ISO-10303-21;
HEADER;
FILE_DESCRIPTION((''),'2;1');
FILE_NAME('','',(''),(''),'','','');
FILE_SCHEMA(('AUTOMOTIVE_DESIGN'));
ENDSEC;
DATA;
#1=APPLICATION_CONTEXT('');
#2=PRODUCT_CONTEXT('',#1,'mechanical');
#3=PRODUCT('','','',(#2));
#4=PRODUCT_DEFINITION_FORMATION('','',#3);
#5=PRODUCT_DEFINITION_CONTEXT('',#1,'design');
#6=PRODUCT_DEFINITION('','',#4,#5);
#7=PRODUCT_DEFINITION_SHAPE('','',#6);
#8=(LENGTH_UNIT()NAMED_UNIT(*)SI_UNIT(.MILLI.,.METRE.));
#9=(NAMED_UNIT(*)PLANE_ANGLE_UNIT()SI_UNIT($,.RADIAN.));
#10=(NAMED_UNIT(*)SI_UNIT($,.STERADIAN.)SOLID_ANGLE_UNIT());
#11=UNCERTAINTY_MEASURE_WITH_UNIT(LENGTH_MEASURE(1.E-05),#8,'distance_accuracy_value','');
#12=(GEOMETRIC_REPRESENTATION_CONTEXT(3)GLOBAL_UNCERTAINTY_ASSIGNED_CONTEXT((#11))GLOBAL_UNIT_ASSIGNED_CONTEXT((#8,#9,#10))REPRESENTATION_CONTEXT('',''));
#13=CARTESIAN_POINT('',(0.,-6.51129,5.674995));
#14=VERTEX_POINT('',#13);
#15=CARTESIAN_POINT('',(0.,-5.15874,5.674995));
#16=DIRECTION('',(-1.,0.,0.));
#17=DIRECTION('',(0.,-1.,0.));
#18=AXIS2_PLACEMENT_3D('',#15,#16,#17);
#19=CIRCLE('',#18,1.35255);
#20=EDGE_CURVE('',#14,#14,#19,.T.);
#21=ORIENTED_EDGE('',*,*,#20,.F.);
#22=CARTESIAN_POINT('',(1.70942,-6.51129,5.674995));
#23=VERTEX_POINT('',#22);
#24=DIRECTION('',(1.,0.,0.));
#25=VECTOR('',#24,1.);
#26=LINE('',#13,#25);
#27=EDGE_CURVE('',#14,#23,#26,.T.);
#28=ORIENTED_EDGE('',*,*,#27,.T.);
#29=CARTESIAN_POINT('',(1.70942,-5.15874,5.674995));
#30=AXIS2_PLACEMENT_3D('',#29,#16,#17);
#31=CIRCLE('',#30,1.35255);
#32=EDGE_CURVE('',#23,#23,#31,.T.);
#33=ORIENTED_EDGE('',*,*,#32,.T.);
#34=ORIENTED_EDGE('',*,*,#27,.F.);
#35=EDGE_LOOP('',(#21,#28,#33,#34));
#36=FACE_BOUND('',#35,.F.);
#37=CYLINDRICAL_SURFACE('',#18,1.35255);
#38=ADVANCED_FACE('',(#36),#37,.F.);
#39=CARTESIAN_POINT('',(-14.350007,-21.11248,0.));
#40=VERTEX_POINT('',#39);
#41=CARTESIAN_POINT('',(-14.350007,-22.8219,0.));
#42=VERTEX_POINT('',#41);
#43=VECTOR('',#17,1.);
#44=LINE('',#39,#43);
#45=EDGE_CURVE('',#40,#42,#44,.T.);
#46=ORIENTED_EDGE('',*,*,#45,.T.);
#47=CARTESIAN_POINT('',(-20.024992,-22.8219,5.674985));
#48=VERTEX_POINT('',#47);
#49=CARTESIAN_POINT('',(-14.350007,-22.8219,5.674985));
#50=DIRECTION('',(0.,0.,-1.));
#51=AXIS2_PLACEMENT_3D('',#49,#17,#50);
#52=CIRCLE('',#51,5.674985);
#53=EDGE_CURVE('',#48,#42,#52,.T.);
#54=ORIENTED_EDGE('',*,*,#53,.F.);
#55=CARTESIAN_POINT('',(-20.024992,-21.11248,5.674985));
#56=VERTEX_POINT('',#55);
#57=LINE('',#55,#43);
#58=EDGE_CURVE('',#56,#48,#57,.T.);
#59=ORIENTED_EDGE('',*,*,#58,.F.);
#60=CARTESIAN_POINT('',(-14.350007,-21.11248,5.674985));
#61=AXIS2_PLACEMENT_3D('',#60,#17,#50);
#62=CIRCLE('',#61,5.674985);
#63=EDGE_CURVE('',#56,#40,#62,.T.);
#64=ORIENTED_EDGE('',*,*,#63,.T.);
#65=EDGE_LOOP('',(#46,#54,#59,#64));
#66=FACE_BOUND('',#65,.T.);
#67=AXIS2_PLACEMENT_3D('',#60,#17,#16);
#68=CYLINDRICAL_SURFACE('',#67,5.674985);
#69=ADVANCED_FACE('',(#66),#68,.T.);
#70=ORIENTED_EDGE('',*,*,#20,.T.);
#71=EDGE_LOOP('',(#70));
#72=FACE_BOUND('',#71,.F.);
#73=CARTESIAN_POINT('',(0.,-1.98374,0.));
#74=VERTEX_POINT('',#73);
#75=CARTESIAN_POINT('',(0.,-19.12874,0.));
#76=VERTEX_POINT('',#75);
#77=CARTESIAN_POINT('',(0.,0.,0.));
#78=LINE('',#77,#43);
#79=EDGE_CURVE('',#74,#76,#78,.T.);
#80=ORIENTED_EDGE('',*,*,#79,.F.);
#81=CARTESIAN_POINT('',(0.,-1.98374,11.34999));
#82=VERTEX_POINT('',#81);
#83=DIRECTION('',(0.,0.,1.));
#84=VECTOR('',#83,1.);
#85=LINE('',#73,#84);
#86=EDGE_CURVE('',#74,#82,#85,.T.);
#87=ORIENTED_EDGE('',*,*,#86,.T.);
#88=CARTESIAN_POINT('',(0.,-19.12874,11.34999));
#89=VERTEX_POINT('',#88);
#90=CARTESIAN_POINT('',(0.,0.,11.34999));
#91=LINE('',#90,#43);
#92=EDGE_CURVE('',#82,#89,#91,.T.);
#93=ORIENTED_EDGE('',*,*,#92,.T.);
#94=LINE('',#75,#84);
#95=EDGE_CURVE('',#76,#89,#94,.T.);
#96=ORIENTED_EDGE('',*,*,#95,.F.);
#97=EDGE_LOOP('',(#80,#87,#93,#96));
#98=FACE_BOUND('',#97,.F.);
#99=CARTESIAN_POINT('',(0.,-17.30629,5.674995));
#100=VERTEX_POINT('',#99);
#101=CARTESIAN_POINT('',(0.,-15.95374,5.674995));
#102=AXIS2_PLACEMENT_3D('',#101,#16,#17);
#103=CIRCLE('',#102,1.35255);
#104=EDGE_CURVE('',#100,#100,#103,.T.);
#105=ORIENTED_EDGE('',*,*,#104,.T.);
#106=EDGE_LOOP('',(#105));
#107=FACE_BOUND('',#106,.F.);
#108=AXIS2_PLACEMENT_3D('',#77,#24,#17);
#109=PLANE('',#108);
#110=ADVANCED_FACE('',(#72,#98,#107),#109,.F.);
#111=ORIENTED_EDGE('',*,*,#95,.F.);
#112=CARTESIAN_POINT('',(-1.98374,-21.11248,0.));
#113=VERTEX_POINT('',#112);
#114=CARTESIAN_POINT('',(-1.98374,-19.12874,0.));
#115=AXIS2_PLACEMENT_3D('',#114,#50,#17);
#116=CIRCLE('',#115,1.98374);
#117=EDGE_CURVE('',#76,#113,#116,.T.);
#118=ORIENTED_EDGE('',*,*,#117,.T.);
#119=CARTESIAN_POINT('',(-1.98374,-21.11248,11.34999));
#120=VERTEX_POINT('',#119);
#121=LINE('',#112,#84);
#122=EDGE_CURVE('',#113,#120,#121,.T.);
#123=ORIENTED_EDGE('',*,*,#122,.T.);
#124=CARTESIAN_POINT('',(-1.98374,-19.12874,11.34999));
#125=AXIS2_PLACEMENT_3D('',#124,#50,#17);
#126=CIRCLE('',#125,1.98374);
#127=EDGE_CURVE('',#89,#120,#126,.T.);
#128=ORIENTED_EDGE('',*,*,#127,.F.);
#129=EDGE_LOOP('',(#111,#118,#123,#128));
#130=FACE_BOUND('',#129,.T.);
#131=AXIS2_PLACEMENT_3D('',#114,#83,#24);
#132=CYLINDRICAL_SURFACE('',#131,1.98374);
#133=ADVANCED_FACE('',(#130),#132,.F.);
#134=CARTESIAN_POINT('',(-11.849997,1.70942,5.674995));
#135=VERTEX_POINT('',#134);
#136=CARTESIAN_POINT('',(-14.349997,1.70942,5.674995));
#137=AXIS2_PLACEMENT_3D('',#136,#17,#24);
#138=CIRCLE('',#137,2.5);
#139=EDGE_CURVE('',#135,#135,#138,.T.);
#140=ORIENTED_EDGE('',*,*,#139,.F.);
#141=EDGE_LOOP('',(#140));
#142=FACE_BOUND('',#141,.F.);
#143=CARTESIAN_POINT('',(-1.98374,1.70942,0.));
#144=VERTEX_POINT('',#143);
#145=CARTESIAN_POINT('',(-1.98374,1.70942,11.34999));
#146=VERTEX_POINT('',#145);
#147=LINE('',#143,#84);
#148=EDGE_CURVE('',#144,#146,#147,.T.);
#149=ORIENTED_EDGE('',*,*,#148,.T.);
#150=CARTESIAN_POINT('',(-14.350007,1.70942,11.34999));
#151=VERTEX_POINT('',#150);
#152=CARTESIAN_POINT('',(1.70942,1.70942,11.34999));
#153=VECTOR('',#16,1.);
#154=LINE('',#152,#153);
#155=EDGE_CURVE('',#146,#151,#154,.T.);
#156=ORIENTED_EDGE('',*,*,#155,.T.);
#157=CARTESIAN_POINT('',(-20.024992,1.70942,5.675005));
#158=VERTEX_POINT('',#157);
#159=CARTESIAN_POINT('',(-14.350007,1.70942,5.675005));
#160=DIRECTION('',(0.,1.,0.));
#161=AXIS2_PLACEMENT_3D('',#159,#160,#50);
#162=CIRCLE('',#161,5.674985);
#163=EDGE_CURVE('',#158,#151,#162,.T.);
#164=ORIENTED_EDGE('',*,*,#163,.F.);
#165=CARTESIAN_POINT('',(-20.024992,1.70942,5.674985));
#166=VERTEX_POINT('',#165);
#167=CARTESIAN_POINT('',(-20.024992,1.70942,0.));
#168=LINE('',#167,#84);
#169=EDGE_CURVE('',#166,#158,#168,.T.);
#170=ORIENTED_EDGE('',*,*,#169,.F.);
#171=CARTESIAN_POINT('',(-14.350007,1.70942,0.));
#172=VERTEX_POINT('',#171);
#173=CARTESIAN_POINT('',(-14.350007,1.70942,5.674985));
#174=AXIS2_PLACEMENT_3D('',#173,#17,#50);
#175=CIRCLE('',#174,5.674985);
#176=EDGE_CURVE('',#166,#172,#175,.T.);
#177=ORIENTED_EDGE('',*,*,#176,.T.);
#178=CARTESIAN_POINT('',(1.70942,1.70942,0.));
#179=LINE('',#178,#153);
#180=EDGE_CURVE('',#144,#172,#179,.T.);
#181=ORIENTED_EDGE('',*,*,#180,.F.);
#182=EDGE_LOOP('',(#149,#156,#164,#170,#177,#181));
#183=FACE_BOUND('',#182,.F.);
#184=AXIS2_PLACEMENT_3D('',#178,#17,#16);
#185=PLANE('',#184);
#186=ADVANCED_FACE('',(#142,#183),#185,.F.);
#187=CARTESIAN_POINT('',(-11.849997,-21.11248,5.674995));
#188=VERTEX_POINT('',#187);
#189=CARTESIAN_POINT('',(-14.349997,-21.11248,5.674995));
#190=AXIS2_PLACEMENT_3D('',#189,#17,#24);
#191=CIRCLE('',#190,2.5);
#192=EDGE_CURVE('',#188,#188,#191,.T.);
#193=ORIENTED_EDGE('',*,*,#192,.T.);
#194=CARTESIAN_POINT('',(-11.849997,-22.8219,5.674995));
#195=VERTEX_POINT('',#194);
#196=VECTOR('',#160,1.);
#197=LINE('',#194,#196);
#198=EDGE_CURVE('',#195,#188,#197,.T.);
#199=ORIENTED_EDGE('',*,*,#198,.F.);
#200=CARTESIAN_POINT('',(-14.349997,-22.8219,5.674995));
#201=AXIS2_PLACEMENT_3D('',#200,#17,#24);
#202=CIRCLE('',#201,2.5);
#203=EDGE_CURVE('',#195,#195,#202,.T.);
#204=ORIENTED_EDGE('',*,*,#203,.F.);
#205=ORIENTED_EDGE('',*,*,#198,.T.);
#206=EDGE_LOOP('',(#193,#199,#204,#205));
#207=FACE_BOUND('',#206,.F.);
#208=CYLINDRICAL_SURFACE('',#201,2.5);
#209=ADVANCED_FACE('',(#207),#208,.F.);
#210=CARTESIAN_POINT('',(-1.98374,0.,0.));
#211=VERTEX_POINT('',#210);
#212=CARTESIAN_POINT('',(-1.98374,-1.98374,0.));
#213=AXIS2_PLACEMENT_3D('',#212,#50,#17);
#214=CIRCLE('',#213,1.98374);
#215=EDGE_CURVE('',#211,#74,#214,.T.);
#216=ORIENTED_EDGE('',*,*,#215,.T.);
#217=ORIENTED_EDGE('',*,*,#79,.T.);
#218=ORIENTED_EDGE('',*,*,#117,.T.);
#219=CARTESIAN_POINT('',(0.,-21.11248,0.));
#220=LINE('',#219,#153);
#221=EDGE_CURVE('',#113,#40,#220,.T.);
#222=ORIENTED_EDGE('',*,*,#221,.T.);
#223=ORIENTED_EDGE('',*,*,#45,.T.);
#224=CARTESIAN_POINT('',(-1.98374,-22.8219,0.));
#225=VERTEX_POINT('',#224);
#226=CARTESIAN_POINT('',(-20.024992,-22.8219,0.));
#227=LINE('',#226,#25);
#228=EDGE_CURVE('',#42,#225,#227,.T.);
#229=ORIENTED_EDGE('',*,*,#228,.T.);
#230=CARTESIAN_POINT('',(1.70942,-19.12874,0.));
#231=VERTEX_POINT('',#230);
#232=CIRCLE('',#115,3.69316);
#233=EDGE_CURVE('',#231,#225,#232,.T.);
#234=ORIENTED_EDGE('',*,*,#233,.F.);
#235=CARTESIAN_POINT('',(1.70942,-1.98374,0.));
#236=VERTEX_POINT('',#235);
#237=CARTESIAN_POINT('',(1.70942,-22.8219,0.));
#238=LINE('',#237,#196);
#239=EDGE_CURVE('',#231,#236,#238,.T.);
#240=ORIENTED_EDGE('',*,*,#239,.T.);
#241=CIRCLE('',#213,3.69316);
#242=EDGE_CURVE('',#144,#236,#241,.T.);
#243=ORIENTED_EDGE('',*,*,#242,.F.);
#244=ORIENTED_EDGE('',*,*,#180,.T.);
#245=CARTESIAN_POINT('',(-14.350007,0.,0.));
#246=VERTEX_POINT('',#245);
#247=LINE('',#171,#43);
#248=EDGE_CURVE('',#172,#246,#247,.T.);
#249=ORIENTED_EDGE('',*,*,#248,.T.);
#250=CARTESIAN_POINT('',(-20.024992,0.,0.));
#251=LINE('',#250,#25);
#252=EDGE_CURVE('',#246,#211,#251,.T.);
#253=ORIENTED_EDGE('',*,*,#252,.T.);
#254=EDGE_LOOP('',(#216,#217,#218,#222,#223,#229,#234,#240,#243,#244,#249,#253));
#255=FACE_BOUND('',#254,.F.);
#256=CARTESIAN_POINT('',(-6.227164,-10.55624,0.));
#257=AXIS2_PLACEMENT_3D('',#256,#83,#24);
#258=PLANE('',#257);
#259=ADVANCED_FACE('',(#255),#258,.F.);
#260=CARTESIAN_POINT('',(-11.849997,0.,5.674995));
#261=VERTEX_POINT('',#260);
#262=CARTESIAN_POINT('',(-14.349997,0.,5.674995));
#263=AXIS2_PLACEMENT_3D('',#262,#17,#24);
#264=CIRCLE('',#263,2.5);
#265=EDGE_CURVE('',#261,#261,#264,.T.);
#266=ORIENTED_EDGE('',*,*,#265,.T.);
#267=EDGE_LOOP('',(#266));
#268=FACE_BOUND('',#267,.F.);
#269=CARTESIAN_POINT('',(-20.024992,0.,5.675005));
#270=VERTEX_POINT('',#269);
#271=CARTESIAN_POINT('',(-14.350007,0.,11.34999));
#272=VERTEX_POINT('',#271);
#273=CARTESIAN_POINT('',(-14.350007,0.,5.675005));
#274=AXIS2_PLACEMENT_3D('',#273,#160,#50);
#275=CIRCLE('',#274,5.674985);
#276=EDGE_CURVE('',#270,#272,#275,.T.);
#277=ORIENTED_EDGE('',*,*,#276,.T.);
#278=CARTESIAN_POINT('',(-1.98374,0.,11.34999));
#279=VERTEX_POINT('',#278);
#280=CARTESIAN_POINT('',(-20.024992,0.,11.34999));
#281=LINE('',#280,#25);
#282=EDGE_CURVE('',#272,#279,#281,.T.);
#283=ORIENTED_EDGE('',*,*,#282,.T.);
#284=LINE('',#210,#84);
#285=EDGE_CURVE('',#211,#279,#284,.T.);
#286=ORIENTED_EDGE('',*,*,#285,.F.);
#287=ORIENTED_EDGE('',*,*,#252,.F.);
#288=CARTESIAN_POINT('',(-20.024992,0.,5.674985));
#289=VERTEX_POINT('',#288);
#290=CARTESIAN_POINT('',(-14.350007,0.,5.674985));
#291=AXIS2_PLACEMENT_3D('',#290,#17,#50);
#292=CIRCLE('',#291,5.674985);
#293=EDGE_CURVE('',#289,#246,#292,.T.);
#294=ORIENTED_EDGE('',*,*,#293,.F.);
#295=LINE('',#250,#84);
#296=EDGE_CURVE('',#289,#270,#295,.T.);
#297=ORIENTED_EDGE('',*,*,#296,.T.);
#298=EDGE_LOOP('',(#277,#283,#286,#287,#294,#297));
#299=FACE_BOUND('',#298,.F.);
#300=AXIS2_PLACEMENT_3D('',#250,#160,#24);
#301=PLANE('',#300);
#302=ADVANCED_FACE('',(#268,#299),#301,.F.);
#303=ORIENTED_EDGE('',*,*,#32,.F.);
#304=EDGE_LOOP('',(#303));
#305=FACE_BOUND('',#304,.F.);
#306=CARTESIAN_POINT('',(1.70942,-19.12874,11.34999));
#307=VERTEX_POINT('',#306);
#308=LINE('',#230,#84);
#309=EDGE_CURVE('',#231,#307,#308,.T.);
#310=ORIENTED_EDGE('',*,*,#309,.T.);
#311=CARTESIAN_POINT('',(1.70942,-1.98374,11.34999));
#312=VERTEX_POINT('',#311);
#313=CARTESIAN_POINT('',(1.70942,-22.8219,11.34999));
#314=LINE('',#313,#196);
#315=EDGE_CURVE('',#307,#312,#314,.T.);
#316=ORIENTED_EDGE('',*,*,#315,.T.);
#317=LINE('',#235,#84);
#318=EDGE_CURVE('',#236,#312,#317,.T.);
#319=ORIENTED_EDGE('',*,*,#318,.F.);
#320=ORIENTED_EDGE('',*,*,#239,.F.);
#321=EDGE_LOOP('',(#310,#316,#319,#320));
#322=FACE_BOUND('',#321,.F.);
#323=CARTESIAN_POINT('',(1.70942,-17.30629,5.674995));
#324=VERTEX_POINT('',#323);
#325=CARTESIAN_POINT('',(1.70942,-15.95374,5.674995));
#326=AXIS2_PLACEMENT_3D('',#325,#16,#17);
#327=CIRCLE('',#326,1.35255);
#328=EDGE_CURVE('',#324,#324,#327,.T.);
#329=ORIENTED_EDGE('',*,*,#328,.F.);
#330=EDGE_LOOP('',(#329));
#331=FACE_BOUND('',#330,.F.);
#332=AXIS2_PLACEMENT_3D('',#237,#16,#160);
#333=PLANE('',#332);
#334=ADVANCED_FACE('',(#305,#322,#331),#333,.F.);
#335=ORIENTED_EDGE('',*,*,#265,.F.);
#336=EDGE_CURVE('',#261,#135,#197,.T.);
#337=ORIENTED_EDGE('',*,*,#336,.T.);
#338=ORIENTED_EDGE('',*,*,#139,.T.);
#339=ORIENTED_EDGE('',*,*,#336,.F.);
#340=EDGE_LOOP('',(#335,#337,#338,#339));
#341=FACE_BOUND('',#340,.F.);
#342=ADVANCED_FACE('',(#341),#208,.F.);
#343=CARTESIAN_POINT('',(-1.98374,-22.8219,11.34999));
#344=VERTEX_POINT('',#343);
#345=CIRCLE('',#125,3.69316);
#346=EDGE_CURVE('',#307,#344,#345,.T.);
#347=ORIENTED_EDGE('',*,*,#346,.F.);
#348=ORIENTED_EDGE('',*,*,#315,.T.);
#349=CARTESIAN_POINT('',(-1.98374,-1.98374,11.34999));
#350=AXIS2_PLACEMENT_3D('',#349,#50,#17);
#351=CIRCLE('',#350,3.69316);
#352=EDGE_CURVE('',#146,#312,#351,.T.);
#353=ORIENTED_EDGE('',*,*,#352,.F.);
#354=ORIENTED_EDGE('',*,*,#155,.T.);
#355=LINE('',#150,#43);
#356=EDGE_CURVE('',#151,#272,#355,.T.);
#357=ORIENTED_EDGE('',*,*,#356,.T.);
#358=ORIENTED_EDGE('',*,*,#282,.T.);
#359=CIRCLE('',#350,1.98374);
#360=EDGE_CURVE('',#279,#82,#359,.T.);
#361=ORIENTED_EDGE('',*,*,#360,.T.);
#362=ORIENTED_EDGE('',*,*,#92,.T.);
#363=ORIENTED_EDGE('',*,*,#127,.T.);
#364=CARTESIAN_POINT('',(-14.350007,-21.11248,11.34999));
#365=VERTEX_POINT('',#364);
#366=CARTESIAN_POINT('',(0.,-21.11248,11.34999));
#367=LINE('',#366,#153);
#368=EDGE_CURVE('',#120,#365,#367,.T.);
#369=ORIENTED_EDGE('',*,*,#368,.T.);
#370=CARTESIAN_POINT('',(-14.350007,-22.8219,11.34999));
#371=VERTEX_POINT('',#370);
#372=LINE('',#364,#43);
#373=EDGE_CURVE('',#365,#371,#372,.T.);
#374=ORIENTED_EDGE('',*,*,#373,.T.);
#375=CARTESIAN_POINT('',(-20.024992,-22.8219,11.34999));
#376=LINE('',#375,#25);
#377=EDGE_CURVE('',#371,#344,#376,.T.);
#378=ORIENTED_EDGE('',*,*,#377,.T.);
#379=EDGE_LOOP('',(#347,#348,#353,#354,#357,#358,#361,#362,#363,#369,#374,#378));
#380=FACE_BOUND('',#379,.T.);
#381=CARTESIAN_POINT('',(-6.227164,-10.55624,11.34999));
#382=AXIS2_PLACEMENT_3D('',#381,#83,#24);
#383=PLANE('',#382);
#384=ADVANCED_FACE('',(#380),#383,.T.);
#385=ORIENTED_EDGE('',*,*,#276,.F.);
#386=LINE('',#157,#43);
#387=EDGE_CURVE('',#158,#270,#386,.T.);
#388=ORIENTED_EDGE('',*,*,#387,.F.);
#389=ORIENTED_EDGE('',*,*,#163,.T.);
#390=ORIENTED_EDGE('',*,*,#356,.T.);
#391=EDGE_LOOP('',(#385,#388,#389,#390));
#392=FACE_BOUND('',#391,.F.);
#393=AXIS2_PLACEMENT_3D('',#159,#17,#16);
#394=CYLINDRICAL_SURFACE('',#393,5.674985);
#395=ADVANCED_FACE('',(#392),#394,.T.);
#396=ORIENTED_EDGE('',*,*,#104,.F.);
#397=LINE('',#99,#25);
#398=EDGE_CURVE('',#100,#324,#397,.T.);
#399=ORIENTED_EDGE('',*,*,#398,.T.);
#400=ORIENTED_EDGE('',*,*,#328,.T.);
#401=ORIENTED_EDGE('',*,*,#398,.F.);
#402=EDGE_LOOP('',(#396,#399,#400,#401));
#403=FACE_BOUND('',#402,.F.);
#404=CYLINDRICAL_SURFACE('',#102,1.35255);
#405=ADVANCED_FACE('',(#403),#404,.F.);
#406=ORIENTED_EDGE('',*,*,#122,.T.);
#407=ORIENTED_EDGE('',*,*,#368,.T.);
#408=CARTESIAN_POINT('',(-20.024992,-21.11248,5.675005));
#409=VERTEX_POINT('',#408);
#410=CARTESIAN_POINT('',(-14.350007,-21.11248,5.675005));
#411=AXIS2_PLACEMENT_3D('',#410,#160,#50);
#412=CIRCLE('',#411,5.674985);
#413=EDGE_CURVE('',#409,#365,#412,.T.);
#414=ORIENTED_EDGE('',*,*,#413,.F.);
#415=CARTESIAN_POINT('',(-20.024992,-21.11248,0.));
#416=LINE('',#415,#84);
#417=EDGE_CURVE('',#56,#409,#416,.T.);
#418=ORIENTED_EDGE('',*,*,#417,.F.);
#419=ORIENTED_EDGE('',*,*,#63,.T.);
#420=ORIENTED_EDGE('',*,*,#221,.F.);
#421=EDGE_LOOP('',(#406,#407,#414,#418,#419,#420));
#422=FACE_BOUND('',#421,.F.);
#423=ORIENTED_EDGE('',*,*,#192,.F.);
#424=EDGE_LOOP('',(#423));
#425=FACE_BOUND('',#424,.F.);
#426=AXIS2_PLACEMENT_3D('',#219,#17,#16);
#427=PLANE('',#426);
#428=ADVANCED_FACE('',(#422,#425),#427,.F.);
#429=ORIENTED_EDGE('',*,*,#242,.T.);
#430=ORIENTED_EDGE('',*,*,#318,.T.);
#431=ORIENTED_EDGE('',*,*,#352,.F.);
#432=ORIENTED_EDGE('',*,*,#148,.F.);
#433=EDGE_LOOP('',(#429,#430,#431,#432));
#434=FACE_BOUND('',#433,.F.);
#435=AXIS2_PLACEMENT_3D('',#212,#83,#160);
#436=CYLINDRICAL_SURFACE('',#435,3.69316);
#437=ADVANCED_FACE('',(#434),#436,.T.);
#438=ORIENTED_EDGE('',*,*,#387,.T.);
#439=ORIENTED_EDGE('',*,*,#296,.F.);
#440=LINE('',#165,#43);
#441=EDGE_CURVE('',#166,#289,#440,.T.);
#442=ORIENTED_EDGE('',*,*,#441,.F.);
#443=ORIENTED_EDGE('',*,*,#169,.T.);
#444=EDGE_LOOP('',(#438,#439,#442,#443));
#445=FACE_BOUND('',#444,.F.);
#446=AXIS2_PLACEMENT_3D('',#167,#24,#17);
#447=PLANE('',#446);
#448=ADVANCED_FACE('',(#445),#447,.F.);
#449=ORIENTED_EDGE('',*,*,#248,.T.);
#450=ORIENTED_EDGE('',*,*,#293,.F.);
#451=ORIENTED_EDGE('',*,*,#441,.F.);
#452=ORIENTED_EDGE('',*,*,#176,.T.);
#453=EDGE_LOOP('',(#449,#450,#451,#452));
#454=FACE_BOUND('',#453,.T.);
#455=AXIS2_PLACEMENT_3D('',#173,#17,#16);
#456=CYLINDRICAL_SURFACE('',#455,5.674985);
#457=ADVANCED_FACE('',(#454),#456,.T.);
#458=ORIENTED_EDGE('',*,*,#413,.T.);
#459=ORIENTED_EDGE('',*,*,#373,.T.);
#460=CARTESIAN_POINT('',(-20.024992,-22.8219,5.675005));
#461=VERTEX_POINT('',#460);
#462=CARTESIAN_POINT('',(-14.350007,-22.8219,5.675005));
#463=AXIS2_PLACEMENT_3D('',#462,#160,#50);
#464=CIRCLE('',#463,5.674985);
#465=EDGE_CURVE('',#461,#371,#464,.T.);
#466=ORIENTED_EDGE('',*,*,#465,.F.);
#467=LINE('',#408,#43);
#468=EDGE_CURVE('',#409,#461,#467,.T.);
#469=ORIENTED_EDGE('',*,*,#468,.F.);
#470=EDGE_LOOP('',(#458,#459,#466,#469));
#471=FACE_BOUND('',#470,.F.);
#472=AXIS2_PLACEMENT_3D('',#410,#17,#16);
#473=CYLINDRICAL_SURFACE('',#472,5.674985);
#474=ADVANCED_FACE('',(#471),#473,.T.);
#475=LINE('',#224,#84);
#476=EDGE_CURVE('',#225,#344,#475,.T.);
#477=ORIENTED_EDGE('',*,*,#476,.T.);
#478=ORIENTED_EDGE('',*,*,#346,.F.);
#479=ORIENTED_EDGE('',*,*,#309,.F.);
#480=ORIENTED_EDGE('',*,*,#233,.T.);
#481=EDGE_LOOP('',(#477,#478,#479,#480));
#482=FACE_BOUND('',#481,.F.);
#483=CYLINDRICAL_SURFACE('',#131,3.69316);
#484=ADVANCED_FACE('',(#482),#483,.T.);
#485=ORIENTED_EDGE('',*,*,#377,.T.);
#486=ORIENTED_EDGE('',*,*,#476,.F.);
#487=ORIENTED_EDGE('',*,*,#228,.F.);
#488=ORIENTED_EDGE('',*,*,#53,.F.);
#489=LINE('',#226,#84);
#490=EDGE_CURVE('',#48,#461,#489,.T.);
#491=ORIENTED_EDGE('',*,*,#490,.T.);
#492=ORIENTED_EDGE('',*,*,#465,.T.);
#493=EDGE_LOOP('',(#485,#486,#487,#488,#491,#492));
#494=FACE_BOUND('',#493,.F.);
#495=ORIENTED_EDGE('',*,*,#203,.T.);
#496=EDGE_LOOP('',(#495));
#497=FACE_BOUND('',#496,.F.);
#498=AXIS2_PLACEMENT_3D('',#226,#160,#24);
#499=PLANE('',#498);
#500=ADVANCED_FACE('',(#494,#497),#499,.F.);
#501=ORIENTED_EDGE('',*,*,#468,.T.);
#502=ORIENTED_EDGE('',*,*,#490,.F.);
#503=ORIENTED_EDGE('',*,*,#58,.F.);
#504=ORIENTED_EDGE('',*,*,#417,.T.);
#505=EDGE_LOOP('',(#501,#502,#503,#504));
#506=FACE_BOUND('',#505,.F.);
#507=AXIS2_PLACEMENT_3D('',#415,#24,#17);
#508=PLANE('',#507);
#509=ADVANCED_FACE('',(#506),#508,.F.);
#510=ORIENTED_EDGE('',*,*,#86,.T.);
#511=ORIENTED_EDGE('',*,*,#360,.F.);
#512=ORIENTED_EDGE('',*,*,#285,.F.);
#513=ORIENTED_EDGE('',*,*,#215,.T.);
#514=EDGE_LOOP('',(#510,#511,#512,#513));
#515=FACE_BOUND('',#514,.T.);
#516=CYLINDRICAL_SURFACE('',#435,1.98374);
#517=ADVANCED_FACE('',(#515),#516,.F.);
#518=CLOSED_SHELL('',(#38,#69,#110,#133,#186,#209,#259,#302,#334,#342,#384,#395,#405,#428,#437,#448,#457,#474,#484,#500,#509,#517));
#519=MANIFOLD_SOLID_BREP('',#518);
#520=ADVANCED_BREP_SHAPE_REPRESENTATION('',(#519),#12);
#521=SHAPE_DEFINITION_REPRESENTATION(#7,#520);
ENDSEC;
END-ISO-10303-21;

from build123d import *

# Parameters (mm, degrees)
F1_DEPTH = 11.34999
F2_R     = 5.674985
F3_R     = 2.5
F4_DEPTH = 24.53132
F5_R     = 3.69316
F6_R     = 1.98374
F7_R     = 1.35255
F8_DEPTH = 1.70942


# Not quite as in the source:
# - a fillet or chamfer is up to 0.001 mm smaller than in the source, because OpenCascade refuses the exact size


with BuildPart() as f1:
    # F0 (on Top) → F1 (new body)
    with BuildSketch(Plane.XY):
        Polygon((-20.0249917, 0), (0, 0), (0, -21.11248), (-20.0249917, -21.11248), (-20.0249917, -22.8219), (1.70942, -22.8219), (1.70942, 1.70942), (-20.0249917, 1.70942), align=None)
    extrude(amount=F1_DEPTH)

    # F2 (radius 5.674995 in the source; OpenCascade refuses exactly that, so slightly less here)
    f2_edges = [f1.edges().sort_by_distance(p)[0] for p in [
        (-20.024992, -21.96719, 11.34999),
        (-20.024992, -21.96719, 0),
        (-20.024992, 0.85471, 11.34999),
        (-20.024992, 0.85471, 0),
    ]]
    fillet(f2_edges, radius=F2_R)

    # F3 (on face) → F4 (cut, through all)
    with BuildSketch(Plane.XZ.offset(22.8219)):
        with Locations((-14.3499967, 5.674995)):
            Circle(F3_R)
    extrude(amount=-F4_DEPTH, mode=Mode.SUBTRACT)

    # F5
    f5_edges = [f1.edges().sort_by_distance(p)[0] for p in [
        (1.70942, -22.8219, 5.674995),
        (1.70942, 1.70942, 5.674995),
    ]]
    fillet(f5_edges, radius=F5_R)

    # F6
    f6_edges = [f1.edges().sort_by_distance(p)[0] for p in [
        (0, -21.11248, 5.674995),
        (0, 0, 5.674995),
    ]]
    fillet(f6_edges, radius=F6_R)

    # F7 (on face) → F8 (cut, through all)
    with BuildSketch(Plane(origin=(0, 0, 0), x_dir=(0, -1, 0), z_dir=(-1, 0, 0))):
        with Locations((15.95374, 5.674995)):
            Circle(F7_R)
        with Locations((5.15874, 5.674995)):
            Circle(F7_R)
    extrude(amount=-F8_DEPTH, mode=Mode.SUBTRACT)


solid = f1.part
